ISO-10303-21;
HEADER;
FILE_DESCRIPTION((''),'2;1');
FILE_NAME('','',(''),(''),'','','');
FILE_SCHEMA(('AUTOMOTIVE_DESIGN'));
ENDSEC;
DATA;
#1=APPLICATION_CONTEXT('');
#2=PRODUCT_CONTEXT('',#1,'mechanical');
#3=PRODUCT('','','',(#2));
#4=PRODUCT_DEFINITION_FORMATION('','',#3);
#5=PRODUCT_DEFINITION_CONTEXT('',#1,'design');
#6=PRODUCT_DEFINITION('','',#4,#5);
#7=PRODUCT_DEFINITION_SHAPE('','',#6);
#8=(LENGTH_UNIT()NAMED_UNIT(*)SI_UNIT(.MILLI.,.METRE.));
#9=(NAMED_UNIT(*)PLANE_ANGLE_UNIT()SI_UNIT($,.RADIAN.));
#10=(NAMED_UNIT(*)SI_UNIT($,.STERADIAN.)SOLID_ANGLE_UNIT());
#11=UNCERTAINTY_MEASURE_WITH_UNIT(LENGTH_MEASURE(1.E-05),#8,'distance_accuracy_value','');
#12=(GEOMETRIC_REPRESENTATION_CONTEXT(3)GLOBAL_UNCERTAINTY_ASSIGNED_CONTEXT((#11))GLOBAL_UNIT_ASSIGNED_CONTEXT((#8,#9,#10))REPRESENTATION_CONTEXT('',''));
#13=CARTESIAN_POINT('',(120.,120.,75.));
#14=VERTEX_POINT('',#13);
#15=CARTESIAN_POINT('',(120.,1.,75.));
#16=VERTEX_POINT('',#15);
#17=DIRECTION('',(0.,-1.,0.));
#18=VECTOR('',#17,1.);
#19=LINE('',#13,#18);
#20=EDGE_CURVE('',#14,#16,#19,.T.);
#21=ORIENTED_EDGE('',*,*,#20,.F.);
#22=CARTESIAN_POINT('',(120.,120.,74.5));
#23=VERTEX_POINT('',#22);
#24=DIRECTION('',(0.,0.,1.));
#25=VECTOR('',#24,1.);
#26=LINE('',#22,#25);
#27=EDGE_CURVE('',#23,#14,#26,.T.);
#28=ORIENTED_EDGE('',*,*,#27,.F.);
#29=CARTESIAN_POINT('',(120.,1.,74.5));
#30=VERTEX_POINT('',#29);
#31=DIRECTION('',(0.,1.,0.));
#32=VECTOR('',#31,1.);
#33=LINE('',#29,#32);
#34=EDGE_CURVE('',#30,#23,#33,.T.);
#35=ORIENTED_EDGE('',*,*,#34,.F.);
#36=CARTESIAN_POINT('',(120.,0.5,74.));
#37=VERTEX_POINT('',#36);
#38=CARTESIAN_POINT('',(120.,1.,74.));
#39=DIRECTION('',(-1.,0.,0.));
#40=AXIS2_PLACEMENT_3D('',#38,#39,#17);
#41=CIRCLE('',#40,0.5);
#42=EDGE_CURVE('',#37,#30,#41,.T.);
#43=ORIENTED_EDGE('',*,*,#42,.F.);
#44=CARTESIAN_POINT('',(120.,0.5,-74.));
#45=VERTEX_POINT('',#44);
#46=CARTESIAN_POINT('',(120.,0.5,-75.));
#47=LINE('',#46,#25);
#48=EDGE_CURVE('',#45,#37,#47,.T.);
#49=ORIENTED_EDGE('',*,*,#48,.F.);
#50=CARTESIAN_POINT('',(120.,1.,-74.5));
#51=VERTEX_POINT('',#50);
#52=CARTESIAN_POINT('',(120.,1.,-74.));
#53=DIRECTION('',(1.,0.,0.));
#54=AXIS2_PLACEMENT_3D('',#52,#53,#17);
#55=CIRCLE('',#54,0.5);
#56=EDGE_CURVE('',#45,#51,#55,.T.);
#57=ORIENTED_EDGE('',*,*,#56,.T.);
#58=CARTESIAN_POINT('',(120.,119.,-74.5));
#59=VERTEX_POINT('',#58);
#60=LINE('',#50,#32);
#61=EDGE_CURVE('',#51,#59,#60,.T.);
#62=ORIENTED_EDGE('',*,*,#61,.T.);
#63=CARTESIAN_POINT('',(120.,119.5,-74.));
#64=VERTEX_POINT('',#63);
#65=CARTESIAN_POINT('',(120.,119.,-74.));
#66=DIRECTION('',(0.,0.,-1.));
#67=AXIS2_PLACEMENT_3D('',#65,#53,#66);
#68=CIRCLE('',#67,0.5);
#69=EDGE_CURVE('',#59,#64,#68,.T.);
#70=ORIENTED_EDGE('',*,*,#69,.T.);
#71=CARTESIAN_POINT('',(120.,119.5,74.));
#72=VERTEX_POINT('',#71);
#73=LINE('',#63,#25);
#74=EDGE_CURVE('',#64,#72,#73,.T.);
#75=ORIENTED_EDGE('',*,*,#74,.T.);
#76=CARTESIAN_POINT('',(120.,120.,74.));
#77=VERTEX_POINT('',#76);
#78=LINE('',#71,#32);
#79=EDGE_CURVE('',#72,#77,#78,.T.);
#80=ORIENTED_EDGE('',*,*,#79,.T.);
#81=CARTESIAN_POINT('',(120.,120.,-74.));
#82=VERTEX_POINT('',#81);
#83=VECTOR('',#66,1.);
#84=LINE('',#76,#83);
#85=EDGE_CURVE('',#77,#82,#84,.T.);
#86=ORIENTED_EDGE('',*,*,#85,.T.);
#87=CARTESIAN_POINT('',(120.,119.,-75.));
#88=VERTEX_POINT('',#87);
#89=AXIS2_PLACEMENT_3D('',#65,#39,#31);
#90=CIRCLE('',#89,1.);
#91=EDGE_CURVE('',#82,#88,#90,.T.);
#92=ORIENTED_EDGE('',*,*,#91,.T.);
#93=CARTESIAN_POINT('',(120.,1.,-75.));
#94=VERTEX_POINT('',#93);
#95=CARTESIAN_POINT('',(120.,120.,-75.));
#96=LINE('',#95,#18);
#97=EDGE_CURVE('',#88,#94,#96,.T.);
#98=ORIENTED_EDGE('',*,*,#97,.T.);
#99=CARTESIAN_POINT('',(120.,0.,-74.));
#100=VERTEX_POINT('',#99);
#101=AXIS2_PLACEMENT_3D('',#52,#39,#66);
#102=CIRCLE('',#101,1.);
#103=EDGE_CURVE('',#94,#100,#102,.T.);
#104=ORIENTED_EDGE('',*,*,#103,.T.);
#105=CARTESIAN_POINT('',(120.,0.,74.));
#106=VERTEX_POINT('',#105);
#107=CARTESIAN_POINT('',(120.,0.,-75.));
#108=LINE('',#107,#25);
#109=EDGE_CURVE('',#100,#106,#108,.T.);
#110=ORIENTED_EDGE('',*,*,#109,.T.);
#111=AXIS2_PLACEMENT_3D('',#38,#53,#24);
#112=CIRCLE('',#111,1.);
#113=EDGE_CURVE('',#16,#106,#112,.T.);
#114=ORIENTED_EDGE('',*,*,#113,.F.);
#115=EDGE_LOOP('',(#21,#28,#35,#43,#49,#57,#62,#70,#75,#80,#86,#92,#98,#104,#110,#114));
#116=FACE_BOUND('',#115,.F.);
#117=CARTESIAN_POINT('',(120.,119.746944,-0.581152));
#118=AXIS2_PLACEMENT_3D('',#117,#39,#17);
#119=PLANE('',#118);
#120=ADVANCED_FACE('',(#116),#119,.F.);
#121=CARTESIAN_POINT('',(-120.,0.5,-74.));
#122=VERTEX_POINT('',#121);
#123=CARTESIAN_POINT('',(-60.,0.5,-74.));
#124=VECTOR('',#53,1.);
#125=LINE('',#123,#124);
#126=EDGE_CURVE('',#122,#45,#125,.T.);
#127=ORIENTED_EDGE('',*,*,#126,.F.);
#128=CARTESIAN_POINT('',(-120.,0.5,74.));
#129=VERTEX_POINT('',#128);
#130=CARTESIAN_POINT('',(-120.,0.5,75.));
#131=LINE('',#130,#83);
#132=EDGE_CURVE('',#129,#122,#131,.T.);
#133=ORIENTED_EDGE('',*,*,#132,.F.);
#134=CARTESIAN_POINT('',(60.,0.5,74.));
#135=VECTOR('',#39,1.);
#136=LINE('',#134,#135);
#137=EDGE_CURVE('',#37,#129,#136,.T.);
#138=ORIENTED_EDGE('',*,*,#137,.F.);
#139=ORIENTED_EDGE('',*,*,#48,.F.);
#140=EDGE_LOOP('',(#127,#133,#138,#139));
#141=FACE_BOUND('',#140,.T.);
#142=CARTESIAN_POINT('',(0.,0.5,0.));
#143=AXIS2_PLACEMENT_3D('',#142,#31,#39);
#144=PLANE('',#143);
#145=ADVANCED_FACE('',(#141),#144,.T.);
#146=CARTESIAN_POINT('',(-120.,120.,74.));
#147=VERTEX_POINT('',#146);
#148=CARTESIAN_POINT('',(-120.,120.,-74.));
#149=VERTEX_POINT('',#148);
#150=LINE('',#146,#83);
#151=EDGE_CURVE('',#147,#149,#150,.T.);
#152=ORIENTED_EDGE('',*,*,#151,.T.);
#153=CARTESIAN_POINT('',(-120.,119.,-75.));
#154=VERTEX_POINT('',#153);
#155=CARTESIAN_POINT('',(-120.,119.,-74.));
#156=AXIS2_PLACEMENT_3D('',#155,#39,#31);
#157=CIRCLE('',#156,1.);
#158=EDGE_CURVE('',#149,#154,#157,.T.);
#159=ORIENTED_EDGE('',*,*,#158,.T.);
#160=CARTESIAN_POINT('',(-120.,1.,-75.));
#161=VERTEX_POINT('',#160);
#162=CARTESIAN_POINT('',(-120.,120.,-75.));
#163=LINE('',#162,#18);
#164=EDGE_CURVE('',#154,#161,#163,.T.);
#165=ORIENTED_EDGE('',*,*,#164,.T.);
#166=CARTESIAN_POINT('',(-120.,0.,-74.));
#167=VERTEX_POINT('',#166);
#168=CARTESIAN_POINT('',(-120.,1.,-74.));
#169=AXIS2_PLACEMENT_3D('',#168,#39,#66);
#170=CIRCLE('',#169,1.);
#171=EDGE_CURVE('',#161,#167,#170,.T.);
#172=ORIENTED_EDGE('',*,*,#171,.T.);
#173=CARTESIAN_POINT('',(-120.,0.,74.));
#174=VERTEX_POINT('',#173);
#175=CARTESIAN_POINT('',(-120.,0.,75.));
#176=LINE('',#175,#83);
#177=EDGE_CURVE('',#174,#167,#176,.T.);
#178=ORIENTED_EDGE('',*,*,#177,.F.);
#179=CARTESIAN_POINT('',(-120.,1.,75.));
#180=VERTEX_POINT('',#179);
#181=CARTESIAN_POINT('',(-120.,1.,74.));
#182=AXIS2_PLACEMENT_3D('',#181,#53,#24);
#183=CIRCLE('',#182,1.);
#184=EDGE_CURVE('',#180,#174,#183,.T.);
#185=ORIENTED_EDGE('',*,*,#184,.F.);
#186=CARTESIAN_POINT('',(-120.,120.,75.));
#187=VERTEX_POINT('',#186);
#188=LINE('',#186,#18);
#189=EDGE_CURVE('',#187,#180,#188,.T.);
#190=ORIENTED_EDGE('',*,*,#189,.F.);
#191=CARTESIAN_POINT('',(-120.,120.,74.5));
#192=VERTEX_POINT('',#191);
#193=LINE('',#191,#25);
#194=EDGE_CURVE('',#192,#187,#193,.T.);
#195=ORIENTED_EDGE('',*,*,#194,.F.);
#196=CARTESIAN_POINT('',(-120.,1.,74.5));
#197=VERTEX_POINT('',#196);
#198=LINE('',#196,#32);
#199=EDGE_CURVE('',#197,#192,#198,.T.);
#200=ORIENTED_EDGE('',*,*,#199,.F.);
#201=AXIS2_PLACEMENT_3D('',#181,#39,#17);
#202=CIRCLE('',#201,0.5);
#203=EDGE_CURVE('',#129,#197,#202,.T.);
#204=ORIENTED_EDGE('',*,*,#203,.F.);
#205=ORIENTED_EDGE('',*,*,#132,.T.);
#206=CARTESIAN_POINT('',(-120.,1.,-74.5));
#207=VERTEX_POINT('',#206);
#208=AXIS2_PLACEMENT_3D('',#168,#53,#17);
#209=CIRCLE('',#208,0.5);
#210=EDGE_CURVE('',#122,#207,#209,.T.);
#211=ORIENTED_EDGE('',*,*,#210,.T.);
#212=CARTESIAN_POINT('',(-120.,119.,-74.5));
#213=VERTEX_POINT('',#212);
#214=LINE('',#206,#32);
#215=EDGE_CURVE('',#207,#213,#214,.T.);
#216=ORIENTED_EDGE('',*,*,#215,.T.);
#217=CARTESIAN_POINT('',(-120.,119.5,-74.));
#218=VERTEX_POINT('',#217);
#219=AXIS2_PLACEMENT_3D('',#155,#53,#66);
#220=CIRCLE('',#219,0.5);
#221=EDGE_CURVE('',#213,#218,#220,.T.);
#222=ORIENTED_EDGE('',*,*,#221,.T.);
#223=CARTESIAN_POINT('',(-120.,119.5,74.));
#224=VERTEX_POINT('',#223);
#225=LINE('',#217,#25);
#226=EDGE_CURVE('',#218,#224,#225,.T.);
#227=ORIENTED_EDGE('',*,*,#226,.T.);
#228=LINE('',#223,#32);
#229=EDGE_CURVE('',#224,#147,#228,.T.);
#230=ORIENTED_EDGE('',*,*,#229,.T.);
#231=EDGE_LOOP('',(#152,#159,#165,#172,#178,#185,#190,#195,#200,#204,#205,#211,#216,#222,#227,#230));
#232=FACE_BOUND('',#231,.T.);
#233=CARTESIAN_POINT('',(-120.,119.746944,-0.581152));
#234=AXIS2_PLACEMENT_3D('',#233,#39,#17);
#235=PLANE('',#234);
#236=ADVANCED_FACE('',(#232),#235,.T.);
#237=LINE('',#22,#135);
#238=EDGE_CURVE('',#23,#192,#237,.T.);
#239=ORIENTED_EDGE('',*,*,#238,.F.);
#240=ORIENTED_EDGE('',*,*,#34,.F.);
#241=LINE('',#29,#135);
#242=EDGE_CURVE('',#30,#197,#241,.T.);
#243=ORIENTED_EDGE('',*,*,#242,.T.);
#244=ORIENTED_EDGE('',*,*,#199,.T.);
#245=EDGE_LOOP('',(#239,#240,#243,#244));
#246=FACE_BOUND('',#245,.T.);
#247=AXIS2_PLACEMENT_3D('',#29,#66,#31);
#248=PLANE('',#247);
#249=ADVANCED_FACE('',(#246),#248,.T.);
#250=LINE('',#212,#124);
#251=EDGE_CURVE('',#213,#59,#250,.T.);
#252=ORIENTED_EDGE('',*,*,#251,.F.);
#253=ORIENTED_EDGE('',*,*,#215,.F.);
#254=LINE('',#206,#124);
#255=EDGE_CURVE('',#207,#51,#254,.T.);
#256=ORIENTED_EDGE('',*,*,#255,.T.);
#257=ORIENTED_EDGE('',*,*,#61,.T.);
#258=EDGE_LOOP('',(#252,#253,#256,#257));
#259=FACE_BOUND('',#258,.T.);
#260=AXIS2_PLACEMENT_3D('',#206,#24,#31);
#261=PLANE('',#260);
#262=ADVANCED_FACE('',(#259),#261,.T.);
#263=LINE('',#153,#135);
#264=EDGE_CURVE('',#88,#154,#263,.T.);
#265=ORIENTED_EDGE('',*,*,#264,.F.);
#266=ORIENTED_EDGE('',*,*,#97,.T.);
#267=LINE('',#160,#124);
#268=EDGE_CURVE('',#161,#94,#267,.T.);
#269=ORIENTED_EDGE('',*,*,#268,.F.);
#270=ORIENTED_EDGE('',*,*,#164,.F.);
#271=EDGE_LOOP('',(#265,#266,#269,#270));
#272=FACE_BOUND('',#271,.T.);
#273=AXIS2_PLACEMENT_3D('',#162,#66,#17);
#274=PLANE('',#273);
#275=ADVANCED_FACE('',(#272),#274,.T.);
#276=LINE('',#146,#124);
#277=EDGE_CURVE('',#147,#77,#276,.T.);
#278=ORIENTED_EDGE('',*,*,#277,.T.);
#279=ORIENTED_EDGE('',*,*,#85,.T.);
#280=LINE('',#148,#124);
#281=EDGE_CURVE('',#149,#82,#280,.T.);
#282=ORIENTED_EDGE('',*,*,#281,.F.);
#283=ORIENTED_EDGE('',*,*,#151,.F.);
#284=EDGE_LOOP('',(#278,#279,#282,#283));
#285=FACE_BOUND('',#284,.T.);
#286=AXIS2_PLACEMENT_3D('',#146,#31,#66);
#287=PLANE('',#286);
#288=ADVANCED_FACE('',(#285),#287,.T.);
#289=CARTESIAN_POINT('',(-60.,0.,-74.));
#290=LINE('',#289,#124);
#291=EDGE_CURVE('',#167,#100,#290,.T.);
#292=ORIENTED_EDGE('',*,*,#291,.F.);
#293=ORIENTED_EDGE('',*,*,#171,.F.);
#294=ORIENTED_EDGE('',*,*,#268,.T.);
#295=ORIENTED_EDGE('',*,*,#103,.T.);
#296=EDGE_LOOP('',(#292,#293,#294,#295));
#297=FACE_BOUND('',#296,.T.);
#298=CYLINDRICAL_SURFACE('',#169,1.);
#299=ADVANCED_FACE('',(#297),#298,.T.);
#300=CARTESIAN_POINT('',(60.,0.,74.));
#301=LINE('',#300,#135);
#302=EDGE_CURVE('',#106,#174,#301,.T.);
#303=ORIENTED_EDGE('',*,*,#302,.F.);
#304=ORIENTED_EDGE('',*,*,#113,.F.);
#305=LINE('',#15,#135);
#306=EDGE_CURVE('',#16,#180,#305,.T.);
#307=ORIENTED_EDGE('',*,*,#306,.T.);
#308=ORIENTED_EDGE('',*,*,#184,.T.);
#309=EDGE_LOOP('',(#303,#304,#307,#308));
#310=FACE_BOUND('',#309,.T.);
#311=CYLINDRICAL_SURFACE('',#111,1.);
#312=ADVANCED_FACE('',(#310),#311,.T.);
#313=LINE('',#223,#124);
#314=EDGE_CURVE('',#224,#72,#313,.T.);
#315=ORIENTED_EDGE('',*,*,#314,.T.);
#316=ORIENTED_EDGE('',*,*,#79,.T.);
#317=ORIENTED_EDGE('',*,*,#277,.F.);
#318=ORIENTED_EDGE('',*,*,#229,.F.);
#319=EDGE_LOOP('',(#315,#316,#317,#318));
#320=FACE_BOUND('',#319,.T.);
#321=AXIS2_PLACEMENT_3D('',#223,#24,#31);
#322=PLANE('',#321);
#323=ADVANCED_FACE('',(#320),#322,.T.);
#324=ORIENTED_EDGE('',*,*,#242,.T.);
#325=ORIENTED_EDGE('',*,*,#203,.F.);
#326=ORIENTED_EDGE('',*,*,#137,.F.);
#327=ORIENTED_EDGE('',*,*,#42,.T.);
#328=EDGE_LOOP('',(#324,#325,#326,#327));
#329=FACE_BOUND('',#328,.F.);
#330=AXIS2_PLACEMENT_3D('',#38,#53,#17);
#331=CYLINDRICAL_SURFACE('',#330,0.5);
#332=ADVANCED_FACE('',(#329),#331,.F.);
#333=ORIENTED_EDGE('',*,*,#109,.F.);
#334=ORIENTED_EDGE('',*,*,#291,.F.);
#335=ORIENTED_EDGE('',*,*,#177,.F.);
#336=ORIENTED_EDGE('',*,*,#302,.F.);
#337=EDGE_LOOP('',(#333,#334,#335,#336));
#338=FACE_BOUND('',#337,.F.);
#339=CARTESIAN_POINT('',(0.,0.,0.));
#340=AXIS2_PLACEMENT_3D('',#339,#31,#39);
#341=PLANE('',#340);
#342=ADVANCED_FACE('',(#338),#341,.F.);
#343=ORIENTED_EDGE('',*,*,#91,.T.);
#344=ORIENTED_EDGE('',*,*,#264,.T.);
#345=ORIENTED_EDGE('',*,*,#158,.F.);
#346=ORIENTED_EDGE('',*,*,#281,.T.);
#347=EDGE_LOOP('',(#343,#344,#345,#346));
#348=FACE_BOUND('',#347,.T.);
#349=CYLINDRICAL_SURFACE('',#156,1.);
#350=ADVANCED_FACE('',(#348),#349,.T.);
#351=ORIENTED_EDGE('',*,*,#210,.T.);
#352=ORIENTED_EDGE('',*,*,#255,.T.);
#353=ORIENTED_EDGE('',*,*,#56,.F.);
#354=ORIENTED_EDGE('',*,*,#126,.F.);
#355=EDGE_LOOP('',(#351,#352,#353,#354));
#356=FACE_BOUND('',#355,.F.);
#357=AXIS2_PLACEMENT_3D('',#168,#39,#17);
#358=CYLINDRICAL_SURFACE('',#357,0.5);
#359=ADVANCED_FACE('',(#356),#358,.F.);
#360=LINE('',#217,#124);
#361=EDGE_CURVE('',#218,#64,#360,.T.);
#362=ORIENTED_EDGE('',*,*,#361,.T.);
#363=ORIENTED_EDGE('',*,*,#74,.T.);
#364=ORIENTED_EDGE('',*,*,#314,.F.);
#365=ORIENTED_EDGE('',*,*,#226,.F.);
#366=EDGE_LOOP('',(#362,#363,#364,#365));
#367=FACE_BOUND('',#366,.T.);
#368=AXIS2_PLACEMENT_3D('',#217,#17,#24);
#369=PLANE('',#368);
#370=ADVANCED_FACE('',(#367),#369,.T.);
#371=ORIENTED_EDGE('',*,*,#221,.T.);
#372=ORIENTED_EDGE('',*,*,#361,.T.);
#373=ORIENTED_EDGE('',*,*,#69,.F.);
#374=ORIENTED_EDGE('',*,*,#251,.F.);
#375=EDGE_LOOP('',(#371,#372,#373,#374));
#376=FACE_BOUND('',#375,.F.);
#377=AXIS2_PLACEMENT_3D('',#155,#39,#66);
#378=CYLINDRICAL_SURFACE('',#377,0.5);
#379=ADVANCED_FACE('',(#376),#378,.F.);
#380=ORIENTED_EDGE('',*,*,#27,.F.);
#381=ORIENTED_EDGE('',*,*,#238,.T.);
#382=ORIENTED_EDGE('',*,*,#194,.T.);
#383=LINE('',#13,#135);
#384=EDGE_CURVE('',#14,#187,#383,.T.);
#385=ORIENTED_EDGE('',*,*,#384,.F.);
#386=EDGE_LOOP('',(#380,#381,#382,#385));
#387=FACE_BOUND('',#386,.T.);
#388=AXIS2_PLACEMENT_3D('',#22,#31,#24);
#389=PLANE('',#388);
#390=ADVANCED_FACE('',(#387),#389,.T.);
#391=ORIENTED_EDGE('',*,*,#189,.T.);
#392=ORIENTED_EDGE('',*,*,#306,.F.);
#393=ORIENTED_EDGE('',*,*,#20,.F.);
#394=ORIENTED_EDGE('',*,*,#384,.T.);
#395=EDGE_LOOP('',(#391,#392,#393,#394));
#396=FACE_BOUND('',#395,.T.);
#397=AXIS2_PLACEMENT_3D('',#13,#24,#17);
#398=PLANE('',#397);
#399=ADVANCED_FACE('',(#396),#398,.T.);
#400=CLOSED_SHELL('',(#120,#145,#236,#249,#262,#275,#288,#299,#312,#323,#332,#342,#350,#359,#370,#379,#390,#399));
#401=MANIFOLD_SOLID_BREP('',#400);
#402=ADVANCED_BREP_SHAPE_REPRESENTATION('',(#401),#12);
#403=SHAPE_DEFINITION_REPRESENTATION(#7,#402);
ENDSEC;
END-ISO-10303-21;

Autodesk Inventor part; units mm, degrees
ref_plane "YZ Plane" through (0, 0, 0) normal (1, 0, 0) x (0, 1, 0)
ref_plane "XZ Plane" through (0, 0, 0) normal (0, 1, 0) x (-1, 0, 0)
ref_plane "XY Plane" through (0, 0, 0) normal (0, 0, 1) x (1, 0, 0)
sketch "Sketch1" plane through (0, 0, 0) normal (0, 1, 0) x (-1, 0, 0)
  line L0 (-120, 75) -> (120, 75)
  line L1 (120, 75) -> (120, -75)
  line L2 (120, -75) -> (-120, -75)
  line L3 (-120, -75) -> (-120, 75)
  line L4 (-120, 75) -> (120, -75) construction
  line L5 (120, 75) -> (-120, -75) construction
  point P0 (0, 0)
  dimension "d0" = 150
  dimension "d1" = 240
extrude "Plate1" add sketch "Sketch1" along normal blind 0.5
sketch "Sketch4" plane through (120, 0, 74.5) normal (0, 0, 1) x (1, 0, 0)
  line L0 (-240, 0) -> (0, 0)
  line L1 (0, 0) -> (0, 120)
  line L2 (0, 120) -> (-240, 120)
  line L3 (-240, 120) -> (-240, 0)
edge flange "Flange1" height 120 angle 90 thickness 0.5 bend radius 0.5 thickness toward (0, 0, 1) relief tear relief width 0.5 relief depth 0.25 edges at (0, 0.5, 75) wall of the first edge with corners at (-120, 0, 74.5) (120, 0, 74.5) (120, 120, 74.5) (-120, 120, 74.5)
bend "Bend1"
corner "Corner1"
sketch "Sketch5" plane through (-120, 0, -74.5) normal (0, 0, -1) x (-1, 0, 0)
  line L0 (-240, 0) -> (0, 0)
  line L1 (0, 0) -> (0, 120)
  line L2 (0, 120) -> (-240, 120)
  line L3 (-240, 120) -> (-240, 0)
edge flange "Flange2" height 120 angle 90 thickness 0.5 bend radius 0.5 thickness toward (0, 0, -1) relief tear relief width 0.5 relief depth 0.25 edges at (0, 0.5, -75) wall of the first edge with corners at (120, 0, -74.5) (-120, 0, -74.5) (-120, 120, -74.5) (120, 120, -74.5)
bend "Bend2"
corner "Corner2"
sketch "Sketch6" plane through (-120, 119.5, -75) normal (0, 1, 0) x (-1, 0, 0)
  line L0 (-240, 0) -> (0, 0)
  line L1 (0, 0) -> (0, 149)
  line L2 (0, 149) -> (-240, 149)
  line L3 (-240, 149) -> (-240, 0)
edge flange "Flange3" height 149 angle 90 thickness 0.5 bend radius 0.5 thickness toward (0, 1, 0) relief tear relief width 0.5 relief depth 0.25 edges at (0, 120, -74.5) wall of the first edge with corners at (120, 119.5, -75) (-120, 119.5, -75) (-120, 119.5, 74) (120, 119.5, 74)
bend "Bend3"
corner "Corner3"
equation "\"d2\" = Thickness"
equation "\"d12\" = BendReliefWidth"
equation "\"d13\" = BendReliefDepth"
equation "\"d14\" = MinimumRemnant"
equation "\"d15\" = TransitionRadius"
equation "\"d18\" = BendRadius"
equation "\"d19\" = CornerReliefSize"
equation "\"d20\" = GapSize"
equation "\"d21\" = JacobiRadiusSize"
equation "\"d22\" = BendReliefWidth"
equation "\"d23\" = BendReliefDepth"
equation "\"d24\" = MinimumRemnant"
equation "\"d25\" = TransitionRadius"
equation "\"d28\" = BendRadius"
equation "\"d29\" = CornerReliefSize"
equation "\"d30\" = GapSize"
equation "\"d31\" = JacobiRadiusSize"
equation "\"d32\" = BendReliefWidth"
equation "\"d33\" = BendReliefDepth"
equation "\"d34\" = MinimumRemnant"
equation "\"d35\" = TransitionRadius"
equation "\"d38\" = BendRadius"
equation "\"d39\" = CornerReliefSize"
equation "\"d40\" = GapSize"
equation "\"d41\" = JacobiRadiusSize"
equation "\"BendRadius\" = Thickness"
equation "\"BendReliefWidth\" = Thickness"
equation "\"BendReliefDepth\" = 0.5 * Thickness"
equation "\"CornerReliefSize\" = 4 * Thickness"
equation "\"MinimumRemnant\" = 2 * Thickness"
equation "\"TransitionRadius\" = BendRadius"
equation "\"JacobiRadiusSize\" = BendRadius"
equation "\"GapSize\" = Thickness"
equation "\"Thickness\" = 0.5"
properties part number "Reflector"
